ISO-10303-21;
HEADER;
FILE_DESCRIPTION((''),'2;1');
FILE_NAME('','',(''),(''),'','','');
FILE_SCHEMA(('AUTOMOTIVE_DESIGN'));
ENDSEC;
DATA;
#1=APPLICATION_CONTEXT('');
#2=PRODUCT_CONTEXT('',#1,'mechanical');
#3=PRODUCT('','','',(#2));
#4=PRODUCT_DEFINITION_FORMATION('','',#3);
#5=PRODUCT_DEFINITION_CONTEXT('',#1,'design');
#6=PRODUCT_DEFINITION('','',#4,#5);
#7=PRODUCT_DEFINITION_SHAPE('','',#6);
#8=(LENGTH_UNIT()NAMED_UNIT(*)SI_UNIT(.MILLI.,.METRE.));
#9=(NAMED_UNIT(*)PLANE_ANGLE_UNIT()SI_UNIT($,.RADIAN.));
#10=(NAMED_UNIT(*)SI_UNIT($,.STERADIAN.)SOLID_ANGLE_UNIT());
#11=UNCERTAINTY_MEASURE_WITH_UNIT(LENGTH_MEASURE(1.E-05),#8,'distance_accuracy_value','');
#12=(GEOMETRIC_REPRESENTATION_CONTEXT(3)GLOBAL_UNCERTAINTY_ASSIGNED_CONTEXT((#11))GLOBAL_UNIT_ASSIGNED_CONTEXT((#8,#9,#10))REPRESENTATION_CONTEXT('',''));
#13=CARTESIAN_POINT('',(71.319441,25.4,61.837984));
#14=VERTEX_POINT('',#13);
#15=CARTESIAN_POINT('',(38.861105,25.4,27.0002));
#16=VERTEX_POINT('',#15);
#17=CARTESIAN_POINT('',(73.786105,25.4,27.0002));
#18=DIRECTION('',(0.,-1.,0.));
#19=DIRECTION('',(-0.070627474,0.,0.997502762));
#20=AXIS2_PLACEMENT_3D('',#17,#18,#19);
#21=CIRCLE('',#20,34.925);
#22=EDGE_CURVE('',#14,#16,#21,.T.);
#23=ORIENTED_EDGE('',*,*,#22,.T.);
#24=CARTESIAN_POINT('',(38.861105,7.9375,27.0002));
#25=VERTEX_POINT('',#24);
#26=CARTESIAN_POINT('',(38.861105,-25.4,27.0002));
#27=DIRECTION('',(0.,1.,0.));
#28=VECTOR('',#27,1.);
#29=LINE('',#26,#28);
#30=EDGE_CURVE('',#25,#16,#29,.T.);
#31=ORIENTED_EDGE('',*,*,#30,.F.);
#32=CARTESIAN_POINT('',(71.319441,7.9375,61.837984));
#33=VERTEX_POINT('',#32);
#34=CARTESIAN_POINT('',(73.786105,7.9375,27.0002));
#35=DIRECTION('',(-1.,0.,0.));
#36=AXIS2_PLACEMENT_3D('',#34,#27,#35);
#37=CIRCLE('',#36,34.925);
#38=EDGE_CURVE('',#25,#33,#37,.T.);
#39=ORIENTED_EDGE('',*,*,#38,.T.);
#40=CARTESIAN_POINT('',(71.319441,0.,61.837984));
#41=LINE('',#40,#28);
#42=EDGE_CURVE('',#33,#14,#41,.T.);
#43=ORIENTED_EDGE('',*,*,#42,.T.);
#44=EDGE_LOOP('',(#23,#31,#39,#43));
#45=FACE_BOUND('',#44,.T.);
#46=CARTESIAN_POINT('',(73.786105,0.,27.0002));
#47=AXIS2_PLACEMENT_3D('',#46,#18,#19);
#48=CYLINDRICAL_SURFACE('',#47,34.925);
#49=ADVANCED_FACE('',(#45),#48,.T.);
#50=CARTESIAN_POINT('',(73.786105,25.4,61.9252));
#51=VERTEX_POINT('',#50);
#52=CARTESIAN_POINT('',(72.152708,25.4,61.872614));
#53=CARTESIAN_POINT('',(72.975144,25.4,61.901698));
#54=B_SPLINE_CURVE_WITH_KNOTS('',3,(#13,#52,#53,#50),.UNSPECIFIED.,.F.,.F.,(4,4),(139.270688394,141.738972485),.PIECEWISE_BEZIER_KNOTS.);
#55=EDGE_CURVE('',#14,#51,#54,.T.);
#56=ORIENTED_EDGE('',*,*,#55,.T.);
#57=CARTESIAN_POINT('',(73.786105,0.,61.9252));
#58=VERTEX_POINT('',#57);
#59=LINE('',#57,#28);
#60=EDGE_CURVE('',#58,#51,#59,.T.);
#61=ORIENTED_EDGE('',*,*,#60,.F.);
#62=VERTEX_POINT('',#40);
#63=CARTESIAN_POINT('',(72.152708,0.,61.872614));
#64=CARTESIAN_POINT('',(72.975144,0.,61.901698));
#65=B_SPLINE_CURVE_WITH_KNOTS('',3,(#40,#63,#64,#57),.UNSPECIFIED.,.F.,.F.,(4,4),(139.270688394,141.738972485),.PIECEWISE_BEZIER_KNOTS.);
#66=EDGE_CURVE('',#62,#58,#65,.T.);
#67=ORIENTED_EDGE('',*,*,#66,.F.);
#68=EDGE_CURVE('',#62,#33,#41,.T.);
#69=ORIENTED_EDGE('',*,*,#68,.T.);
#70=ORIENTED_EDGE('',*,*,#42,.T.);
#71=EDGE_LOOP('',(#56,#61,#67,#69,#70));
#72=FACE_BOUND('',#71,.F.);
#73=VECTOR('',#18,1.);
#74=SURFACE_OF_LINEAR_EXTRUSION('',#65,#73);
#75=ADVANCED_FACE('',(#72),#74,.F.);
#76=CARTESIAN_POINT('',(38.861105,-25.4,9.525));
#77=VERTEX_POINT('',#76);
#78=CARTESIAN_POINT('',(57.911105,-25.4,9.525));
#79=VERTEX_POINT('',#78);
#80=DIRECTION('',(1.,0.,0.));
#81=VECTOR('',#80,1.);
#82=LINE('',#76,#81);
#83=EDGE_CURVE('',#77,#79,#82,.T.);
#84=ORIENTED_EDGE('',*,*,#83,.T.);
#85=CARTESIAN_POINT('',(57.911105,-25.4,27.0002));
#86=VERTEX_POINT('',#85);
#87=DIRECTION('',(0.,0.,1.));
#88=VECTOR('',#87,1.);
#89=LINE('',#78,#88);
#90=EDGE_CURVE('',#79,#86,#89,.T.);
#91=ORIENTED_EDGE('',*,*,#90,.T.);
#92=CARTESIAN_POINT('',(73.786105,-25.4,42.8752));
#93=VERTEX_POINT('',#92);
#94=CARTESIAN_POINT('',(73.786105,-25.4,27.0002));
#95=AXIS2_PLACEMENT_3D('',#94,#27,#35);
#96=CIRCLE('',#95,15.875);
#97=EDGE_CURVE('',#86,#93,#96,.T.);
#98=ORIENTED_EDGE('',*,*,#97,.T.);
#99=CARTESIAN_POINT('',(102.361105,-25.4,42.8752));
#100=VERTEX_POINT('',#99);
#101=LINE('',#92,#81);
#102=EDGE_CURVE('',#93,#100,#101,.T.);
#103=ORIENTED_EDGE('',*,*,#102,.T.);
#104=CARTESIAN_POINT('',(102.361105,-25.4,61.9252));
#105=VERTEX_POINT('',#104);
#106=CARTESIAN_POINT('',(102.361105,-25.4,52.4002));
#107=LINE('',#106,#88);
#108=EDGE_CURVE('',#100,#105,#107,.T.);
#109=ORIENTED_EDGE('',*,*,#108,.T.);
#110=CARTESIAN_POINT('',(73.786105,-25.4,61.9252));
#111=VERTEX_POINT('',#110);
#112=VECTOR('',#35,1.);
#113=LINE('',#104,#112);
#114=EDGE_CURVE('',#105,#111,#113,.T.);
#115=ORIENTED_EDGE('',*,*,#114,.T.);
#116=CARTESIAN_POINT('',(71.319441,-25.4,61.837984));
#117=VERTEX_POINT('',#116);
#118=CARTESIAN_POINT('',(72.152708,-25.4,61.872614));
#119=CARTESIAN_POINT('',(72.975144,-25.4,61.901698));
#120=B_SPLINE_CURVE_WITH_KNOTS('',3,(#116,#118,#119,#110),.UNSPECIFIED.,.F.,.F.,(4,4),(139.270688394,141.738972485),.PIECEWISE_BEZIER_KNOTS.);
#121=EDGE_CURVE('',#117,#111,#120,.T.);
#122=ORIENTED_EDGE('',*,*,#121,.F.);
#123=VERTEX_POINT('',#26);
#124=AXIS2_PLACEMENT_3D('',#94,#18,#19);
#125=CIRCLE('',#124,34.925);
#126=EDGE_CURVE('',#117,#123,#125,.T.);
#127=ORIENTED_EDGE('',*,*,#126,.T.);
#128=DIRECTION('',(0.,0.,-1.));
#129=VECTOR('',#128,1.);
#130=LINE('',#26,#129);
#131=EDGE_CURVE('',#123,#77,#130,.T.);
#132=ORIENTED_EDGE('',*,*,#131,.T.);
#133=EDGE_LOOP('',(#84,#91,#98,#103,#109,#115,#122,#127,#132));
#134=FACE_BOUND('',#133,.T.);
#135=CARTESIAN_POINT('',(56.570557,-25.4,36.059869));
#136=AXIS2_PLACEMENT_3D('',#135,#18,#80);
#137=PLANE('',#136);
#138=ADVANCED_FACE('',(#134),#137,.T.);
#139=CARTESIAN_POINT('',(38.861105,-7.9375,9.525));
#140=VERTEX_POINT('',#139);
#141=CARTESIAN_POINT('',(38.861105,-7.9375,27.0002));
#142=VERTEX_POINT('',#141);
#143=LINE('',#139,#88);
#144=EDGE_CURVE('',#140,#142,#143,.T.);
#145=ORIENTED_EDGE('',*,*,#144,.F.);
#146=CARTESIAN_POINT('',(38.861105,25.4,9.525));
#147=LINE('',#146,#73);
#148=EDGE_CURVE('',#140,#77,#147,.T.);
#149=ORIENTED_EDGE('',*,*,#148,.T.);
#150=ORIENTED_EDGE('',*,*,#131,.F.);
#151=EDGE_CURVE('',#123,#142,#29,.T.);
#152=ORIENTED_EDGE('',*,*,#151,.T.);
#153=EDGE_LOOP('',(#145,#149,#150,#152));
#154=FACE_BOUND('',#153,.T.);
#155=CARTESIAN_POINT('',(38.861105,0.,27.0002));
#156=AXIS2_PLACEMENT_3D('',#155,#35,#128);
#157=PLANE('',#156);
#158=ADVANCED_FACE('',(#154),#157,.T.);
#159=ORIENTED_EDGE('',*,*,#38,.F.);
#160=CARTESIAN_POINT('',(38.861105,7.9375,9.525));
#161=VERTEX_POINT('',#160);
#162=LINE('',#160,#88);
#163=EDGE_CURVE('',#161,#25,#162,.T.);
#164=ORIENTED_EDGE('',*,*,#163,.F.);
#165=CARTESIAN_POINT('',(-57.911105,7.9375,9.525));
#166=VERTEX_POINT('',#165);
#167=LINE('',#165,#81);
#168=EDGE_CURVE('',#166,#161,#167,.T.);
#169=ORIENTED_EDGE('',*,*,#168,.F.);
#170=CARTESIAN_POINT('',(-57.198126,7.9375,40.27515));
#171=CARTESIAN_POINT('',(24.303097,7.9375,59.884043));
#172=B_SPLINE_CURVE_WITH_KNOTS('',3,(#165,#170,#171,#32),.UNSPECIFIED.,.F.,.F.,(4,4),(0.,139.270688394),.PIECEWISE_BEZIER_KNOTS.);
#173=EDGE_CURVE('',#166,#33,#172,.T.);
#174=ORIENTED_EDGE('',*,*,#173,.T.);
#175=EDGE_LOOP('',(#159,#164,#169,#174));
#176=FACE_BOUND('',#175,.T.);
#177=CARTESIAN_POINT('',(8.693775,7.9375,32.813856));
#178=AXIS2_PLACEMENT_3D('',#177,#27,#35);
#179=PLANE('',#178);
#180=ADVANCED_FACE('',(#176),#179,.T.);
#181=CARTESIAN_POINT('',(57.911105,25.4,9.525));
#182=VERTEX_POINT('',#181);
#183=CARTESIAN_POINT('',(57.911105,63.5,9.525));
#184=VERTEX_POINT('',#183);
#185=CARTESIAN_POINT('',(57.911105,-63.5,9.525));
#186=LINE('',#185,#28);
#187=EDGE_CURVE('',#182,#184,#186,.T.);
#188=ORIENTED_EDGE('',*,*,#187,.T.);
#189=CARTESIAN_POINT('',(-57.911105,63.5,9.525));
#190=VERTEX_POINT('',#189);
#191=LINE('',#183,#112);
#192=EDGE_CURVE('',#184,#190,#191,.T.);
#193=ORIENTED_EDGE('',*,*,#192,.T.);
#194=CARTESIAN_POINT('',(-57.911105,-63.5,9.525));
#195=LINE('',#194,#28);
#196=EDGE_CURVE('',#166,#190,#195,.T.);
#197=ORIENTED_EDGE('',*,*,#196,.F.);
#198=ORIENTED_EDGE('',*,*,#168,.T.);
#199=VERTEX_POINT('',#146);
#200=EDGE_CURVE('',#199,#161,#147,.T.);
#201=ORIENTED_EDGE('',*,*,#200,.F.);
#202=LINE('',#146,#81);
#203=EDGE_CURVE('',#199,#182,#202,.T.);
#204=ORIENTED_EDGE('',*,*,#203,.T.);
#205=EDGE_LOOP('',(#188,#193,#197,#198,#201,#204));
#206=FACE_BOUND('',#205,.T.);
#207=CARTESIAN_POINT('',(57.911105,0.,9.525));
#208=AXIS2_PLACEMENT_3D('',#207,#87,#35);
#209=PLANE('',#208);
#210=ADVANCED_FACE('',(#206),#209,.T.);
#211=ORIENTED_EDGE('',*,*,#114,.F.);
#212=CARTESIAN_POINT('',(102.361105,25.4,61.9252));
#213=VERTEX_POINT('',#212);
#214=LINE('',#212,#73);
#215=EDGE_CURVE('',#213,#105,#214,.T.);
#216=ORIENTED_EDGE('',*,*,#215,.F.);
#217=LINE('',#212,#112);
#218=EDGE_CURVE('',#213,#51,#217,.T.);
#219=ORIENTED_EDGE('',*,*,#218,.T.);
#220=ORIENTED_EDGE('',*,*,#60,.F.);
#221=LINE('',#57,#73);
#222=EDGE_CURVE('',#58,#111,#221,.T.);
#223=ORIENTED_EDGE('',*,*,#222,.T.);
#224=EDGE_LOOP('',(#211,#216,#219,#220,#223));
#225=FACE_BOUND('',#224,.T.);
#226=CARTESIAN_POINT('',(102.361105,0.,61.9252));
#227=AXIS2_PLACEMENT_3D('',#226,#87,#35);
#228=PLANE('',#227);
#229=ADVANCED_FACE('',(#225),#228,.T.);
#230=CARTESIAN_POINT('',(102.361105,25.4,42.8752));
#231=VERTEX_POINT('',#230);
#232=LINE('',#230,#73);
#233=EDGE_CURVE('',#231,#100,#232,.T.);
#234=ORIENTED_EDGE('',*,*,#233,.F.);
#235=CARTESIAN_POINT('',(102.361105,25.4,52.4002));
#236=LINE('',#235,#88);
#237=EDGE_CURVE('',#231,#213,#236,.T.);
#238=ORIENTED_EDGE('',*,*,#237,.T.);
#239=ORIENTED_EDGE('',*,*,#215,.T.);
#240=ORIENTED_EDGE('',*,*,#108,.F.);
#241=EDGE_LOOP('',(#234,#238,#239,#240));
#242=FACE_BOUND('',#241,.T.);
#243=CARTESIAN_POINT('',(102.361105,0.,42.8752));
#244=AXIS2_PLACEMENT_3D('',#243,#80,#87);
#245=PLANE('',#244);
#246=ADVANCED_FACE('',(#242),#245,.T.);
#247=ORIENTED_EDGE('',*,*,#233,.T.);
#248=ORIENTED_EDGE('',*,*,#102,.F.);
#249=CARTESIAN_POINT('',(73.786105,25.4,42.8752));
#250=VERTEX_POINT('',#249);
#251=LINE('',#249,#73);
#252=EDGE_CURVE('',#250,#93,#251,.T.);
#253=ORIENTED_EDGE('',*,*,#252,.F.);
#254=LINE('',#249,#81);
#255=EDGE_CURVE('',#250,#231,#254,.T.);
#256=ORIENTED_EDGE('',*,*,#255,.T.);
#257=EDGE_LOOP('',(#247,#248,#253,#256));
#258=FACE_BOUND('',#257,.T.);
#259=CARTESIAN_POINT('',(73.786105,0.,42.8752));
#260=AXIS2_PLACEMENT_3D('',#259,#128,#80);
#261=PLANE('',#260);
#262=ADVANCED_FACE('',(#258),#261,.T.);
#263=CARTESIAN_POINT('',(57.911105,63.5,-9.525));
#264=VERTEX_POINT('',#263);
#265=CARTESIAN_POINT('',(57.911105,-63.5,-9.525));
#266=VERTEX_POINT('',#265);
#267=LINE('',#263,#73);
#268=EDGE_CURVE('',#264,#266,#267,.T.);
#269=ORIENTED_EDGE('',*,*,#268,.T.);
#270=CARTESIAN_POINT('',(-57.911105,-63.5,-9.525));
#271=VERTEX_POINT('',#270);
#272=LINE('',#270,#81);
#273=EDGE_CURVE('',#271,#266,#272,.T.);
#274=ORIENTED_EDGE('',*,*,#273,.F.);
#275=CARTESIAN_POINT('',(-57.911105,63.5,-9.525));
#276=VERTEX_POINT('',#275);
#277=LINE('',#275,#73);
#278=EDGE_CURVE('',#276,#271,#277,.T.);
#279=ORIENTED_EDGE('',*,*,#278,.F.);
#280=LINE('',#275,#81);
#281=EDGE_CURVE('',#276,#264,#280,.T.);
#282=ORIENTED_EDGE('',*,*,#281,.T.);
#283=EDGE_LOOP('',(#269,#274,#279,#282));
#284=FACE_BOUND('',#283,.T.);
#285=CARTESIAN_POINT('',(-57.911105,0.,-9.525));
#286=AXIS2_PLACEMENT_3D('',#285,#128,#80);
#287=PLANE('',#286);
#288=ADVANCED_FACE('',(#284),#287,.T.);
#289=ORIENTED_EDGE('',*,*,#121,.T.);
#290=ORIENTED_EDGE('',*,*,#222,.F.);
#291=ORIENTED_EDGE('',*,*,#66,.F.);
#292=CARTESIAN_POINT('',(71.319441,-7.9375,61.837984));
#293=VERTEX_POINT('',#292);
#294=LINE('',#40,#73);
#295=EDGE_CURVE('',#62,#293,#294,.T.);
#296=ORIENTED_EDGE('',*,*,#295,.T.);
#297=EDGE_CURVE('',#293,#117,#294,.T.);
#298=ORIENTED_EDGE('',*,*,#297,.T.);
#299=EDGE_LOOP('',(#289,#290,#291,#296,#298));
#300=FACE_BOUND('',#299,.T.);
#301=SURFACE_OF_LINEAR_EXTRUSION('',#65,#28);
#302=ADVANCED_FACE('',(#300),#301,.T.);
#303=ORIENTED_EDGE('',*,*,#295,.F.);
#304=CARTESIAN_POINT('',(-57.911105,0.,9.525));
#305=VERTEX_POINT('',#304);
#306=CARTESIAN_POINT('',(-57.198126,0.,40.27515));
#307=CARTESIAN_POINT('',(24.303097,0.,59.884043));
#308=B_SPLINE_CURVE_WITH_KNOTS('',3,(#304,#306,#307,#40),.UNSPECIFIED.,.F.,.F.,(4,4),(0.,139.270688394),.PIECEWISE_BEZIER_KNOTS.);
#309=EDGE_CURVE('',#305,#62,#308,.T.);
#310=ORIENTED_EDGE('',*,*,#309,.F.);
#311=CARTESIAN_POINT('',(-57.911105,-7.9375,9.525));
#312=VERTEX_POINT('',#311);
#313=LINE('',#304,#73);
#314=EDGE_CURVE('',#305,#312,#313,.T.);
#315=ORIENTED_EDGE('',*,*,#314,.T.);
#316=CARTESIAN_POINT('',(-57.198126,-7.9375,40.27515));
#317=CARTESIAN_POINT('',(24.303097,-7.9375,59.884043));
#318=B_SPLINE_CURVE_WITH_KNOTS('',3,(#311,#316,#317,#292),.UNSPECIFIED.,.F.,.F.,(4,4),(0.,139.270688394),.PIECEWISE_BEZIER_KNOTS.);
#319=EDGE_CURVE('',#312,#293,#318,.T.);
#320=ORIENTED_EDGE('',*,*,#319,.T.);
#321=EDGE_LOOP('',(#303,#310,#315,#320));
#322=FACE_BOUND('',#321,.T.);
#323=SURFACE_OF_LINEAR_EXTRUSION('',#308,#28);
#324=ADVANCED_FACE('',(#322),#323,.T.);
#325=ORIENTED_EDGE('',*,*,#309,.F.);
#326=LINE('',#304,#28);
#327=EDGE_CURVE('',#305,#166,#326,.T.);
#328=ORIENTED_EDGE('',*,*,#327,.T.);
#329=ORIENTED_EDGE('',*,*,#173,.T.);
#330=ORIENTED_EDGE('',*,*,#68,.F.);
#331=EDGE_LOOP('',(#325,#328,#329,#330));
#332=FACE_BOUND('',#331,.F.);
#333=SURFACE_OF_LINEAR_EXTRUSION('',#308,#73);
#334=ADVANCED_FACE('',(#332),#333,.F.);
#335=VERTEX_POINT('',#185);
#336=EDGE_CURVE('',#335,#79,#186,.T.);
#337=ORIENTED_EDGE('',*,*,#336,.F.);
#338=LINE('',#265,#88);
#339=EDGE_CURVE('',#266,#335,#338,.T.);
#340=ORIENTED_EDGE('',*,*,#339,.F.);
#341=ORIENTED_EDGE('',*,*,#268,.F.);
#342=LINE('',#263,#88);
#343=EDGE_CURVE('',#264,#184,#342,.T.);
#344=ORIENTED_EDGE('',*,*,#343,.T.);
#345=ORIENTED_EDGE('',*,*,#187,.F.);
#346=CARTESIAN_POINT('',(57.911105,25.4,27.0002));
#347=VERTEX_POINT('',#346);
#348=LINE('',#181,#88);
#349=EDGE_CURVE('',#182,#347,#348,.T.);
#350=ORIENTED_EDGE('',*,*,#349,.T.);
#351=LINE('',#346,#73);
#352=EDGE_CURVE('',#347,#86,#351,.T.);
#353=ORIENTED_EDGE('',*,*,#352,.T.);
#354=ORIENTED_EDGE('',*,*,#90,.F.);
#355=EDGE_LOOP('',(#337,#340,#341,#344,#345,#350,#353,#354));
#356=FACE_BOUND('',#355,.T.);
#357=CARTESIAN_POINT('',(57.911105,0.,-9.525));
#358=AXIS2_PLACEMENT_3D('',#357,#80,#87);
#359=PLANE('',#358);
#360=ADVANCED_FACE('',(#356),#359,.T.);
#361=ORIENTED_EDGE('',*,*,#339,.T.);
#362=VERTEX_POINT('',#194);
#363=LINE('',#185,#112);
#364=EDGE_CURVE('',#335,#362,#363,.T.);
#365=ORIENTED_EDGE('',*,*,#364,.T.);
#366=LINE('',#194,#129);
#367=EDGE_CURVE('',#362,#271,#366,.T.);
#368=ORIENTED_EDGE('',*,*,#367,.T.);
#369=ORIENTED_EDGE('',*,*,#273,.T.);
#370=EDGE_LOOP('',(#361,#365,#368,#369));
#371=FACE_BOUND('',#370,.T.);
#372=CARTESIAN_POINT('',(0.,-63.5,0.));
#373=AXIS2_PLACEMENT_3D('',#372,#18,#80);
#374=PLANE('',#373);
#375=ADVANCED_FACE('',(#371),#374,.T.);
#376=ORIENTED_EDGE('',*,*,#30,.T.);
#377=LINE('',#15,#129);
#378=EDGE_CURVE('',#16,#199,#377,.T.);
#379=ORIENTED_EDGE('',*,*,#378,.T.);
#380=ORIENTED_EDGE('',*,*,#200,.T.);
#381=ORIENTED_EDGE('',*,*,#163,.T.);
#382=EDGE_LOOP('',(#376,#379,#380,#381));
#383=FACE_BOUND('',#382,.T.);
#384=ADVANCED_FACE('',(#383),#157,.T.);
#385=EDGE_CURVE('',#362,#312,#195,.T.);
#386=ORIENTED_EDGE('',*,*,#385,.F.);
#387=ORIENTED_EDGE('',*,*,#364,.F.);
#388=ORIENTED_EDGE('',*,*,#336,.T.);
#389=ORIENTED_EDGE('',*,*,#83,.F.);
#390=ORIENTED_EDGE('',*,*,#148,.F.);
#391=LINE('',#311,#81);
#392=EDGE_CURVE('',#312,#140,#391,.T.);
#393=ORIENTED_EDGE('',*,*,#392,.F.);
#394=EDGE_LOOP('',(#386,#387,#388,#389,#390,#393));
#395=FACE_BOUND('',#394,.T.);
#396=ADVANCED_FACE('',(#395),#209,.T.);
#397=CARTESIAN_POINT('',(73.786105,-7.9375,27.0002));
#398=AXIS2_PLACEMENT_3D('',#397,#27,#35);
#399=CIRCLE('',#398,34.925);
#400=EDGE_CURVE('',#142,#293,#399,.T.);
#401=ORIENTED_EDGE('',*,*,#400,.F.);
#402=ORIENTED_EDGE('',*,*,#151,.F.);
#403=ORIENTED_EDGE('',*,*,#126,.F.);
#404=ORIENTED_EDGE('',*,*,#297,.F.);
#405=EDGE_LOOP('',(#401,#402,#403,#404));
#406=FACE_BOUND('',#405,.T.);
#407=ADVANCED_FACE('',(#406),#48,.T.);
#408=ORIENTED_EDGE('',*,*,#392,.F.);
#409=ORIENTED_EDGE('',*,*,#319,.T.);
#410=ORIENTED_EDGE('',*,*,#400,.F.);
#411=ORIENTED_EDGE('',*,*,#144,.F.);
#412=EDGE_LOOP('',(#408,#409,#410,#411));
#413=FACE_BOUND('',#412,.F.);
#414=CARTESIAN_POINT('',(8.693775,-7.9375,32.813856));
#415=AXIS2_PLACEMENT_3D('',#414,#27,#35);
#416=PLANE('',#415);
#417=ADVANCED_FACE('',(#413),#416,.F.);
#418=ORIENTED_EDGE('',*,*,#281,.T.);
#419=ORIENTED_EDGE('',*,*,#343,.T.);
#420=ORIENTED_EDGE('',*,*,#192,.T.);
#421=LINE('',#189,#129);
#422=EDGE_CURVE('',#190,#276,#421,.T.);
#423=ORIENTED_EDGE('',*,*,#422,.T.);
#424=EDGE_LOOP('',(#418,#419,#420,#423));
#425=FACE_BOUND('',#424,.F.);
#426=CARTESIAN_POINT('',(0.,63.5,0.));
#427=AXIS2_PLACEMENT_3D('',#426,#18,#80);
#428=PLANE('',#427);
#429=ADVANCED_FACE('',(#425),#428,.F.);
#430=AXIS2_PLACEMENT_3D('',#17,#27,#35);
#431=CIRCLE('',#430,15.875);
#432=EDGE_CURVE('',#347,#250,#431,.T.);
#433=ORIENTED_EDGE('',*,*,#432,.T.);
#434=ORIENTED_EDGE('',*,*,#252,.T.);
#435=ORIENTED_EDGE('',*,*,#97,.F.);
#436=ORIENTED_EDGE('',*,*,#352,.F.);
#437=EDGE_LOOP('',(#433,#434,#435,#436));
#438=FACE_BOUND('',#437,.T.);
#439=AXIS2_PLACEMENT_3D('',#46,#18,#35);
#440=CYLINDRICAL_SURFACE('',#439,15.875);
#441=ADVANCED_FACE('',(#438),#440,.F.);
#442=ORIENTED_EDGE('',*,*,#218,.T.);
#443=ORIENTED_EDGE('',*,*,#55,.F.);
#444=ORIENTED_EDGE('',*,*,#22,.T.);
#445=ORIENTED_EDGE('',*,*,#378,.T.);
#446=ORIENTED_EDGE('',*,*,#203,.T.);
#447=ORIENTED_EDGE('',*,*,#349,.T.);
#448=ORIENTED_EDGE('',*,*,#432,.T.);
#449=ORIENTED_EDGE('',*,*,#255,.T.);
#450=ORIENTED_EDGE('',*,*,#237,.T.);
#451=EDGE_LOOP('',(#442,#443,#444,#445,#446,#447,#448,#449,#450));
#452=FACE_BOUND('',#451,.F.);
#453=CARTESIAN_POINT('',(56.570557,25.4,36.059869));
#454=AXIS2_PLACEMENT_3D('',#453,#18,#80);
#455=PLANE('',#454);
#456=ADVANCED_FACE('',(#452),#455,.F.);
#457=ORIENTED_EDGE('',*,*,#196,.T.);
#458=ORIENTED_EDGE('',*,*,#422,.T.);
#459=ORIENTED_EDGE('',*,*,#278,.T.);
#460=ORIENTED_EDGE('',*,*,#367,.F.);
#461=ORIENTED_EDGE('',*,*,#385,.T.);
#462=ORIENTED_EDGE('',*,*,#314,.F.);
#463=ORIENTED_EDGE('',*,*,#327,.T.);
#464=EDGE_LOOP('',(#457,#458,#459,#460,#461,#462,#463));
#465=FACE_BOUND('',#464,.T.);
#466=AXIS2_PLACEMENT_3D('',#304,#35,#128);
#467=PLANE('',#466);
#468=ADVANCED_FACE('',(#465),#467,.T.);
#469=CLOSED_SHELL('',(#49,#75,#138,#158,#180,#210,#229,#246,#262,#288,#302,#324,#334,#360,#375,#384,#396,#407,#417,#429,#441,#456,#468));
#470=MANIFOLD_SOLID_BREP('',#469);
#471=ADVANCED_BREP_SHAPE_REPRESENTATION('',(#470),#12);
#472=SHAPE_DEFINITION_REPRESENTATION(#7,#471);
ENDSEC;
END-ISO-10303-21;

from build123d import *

# Parameters (mm, degrees)
F1_DEPTH = 63.5
F0_W     = 25.4
F0_H     = 19.05
F2_DEPTH = 25.4
F3_DEPTH = 7.9375


# Not quite as in the source:
# - the program builds the solid bodies; features that only make, move or delete a surface that nothing else refers to are left out


with BuildPart() as f1:
    # F0 (on Front) → F1 (new body, symmetric)
    with BuildSketch(Plane.XZ):
        Polygon((38.861105454, 9.525), (-57.911105454, 9.525), (-57.911105454, -9.525), (57.911105454, -9.525), (57.911105454, 9.525), align=None)
    extrude(amount=F1_DEPTH, both=True)

    # F0 (on Front) → F2 (join, symmetric)
    with BuildSketch(Plane.XZ):
        with BuildLine():
            Line((38.861105454, 27.0002), (38.861105454, 9.525))
            Line((38.861105454, 9.525), (57.911105454, 9.525))
            Line((57.911105454, 9.525), (57.911105454, 27.0002))
            ThreePointArc((57.911105454, 27.0002), (62.5607853026, 38.2255201513), (73.786105454, 42.8752))
            Line((73.786105454, 42.8752), (76.961105454, 42.8752))
            Line((76.961105454, 42.8752), (76.961105454, 61.9252))
            Line((76.961105454, 61.9252), (73.786105454, 61.9252))
            add(Edge.make_bspline(
                [(71.3194409243, 61.8379839579), (72.1527081081, 61.872613516), (72.9751435191, 61.9016976168), (73.786105454, 61.9252)],
                knots=[139.2706883943, 139.2706883943, 139.2706883943, 139.2706883943, 141.7389724845, 141.7389724845, 141.7389724845, 141.7389724845], degree=3))
            ThreePointArc((71.3194409243, 61.8379839579), (48.2331811233, 50.8078391763), (38.861105454, 27.0002))
        make_face()
        with Locations((89.661105454, 52.4002)):
            Rectangle(F0_W, F0_H)
    extrude(amount=F2_DEPTH, both=True)

    # F0 (on Front) → F3 (join, symmetric)
    with BuildSketch(Plane.XZ):
        with BuildLine():
            add(Edge.make_bspline(
                [(-57.911105454, 9.525), (-57.1981257704, 40.2751503058), (24.3030967511, 59.8840425909), (71.3194409243, 61.8379839579)],
                knots=[0, 0, 0, 0, 139.2706883943, 139.2706883943, 139.2706883943, 139.2706883943], degree=3))
            Line((-57.911105454, 9.525), (38.861105454, 9.525))
            Line((38.861105454, 9.525), (38.861105454, 27.0002))
            ThreePointArc((38.861105454, 27.0002), (48.2331811233, 50.8078391763), (71.3194409243, 61.8379839579))
        make_face()
    extrude(amount=F3_DEPTH, both=True)


solid = f1.part
